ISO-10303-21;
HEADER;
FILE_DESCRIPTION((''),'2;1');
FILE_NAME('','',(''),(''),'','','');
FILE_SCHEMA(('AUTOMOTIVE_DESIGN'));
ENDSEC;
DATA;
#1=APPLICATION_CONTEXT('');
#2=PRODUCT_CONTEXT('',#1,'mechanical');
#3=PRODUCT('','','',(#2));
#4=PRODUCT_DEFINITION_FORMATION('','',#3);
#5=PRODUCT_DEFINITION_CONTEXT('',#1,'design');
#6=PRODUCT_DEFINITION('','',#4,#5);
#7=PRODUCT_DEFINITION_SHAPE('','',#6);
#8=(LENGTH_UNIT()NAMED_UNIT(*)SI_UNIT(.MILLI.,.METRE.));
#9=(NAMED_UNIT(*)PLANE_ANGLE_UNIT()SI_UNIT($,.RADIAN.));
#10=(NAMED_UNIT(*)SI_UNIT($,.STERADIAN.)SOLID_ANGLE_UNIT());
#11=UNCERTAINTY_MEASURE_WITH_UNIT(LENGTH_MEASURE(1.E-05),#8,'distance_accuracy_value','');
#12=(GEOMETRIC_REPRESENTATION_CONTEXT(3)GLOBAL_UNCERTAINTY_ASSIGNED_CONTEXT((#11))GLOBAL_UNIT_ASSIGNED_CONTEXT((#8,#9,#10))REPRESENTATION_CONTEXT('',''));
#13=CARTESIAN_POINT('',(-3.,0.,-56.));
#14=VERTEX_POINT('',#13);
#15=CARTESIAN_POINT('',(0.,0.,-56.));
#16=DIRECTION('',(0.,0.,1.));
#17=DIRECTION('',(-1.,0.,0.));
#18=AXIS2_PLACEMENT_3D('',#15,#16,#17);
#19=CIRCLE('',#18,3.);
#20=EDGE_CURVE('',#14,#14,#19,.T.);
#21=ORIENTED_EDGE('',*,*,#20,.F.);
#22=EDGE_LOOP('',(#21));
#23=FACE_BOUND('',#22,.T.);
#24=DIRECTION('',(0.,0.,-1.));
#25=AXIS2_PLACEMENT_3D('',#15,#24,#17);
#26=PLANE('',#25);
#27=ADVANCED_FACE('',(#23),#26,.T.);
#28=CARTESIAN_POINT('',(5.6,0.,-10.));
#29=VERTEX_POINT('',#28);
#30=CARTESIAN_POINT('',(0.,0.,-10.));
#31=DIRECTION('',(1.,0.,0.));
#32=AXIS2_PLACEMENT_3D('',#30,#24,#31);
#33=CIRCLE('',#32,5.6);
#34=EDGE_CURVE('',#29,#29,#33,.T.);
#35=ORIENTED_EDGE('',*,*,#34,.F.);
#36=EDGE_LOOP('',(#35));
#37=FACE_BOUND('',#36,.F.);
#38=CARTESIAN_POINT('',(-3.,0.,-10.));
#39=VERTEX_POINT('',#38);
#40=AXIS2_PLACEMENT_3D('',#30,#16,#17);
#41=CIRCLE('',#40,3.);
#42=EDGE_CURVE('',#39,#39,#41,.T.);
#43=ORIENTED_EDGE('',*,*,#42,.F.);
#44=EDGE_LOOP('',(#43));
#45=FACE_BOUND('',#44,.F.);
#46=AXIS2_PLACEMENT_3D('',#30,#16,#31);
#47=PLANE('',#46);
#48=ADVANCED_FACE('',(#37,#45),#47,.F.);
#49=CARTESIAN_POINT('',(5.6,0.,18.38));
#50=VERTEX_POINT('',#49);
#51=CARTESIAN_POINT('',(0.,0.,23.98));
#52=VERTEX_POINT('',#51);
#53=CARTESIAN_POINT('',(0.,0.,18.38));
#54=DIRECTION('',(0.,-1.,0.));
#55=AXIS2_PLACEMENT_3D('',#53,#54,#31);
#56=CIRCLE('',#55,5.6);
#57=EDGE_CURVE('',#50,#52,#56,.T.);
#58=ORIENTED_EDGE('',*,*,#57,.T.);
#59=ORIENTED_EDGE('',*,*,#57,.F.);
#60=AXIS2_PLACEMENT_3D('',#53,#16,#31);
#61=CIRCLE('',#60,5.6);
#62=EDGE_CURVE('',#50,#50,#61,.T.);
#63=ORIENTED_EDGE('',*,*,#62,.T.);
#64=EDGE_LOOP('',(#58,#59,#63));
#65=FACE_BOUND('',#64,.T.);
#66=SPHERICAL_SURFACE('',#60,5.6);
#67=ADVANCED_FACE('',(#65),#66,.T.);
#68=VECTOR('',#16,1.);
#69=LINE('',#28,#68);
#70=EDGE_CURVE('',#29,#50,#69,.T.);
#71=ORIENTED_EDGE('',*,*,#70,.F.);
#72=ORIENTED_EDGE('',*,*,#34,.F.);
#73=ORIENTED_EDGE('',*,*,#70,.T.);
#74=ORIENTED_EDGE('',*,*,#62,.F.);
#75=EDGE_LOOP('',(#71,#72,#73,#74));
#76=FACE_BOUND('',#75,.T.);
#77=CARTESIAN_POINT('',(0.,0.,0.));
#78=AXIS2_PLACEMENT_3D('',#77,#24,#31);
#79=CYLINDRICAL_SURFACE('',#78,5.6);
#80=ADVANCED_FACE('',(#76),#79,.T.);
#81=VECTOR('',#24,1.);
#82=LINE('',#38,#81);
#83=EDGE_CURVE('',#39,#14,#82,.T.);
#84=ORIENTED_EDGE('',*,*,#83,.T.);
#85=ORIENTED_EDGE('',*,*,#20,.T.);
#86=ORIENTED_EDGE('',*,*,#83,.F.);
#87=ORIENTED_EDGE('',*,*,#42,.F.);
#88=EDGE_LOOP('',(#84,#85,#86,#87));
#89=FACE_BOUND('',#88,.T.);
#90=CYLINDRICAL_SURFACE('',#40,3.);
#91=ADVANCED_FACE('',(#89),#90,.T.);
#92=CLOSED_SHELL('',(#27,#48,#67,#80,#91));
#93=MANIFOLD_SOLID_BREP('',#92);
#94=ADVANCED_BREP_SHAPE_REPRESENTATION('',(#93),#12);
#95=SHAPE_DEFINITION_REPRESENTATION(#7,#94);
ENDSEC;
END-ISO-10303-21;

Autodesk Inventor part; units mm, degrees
ref_plane "YZ Plane" through (0, 0, 0) normal (1, 0, 0) x (0, 1, 0)
ref_plane "XZ Plane" through (0, 0, 0) normal (0, 1, 0) x (-1, 0, 0)
ref_plane "XY Plane" through (0, 0, 0) normal (0, 0, 1) x (1, 0, 0)
sketch "Sketch1" plane through (0, 0, 0) normal (0, 0, 1) x (1, 0, 0)
  circle A0 centre (0, 0) radius 6
  dimension "d0" = 12
extrude "Extrusion1" add sketch "Sketch1" along normal blind 24.38 and the other way blind 10
fillet "Fillet1" radius 6 1 edges at (-6, 0, 24.38)
sketch "Sketch2" plane through (0, 0, -10) normal (0, 0, -1) x (-1, 0, 0)
  circle A0 centre (0, 0) radius 3.4
  dimension "d6" = 6.8
extrude "Extrusion2" add sketch "Sketch2" along normal blind 46
thicken "Thicken1" operation add thickness 0.4 both sides no extend neighbours yes toward (-0.9870503, 0.1604113, 0) faces at (5.9223, -0.9625, 12.2533) (5.9223, -0.9625, -6.6667) (-5.8689, 0, 19.6275)
thicken "Thicken2" operation add thickness 0.4 both sides no extend neighbours yes toward (0.9967573, -0.0804666, 0) faces at (-3.389, 0.2736, -25.3333)
properties part number "SpringRod"
